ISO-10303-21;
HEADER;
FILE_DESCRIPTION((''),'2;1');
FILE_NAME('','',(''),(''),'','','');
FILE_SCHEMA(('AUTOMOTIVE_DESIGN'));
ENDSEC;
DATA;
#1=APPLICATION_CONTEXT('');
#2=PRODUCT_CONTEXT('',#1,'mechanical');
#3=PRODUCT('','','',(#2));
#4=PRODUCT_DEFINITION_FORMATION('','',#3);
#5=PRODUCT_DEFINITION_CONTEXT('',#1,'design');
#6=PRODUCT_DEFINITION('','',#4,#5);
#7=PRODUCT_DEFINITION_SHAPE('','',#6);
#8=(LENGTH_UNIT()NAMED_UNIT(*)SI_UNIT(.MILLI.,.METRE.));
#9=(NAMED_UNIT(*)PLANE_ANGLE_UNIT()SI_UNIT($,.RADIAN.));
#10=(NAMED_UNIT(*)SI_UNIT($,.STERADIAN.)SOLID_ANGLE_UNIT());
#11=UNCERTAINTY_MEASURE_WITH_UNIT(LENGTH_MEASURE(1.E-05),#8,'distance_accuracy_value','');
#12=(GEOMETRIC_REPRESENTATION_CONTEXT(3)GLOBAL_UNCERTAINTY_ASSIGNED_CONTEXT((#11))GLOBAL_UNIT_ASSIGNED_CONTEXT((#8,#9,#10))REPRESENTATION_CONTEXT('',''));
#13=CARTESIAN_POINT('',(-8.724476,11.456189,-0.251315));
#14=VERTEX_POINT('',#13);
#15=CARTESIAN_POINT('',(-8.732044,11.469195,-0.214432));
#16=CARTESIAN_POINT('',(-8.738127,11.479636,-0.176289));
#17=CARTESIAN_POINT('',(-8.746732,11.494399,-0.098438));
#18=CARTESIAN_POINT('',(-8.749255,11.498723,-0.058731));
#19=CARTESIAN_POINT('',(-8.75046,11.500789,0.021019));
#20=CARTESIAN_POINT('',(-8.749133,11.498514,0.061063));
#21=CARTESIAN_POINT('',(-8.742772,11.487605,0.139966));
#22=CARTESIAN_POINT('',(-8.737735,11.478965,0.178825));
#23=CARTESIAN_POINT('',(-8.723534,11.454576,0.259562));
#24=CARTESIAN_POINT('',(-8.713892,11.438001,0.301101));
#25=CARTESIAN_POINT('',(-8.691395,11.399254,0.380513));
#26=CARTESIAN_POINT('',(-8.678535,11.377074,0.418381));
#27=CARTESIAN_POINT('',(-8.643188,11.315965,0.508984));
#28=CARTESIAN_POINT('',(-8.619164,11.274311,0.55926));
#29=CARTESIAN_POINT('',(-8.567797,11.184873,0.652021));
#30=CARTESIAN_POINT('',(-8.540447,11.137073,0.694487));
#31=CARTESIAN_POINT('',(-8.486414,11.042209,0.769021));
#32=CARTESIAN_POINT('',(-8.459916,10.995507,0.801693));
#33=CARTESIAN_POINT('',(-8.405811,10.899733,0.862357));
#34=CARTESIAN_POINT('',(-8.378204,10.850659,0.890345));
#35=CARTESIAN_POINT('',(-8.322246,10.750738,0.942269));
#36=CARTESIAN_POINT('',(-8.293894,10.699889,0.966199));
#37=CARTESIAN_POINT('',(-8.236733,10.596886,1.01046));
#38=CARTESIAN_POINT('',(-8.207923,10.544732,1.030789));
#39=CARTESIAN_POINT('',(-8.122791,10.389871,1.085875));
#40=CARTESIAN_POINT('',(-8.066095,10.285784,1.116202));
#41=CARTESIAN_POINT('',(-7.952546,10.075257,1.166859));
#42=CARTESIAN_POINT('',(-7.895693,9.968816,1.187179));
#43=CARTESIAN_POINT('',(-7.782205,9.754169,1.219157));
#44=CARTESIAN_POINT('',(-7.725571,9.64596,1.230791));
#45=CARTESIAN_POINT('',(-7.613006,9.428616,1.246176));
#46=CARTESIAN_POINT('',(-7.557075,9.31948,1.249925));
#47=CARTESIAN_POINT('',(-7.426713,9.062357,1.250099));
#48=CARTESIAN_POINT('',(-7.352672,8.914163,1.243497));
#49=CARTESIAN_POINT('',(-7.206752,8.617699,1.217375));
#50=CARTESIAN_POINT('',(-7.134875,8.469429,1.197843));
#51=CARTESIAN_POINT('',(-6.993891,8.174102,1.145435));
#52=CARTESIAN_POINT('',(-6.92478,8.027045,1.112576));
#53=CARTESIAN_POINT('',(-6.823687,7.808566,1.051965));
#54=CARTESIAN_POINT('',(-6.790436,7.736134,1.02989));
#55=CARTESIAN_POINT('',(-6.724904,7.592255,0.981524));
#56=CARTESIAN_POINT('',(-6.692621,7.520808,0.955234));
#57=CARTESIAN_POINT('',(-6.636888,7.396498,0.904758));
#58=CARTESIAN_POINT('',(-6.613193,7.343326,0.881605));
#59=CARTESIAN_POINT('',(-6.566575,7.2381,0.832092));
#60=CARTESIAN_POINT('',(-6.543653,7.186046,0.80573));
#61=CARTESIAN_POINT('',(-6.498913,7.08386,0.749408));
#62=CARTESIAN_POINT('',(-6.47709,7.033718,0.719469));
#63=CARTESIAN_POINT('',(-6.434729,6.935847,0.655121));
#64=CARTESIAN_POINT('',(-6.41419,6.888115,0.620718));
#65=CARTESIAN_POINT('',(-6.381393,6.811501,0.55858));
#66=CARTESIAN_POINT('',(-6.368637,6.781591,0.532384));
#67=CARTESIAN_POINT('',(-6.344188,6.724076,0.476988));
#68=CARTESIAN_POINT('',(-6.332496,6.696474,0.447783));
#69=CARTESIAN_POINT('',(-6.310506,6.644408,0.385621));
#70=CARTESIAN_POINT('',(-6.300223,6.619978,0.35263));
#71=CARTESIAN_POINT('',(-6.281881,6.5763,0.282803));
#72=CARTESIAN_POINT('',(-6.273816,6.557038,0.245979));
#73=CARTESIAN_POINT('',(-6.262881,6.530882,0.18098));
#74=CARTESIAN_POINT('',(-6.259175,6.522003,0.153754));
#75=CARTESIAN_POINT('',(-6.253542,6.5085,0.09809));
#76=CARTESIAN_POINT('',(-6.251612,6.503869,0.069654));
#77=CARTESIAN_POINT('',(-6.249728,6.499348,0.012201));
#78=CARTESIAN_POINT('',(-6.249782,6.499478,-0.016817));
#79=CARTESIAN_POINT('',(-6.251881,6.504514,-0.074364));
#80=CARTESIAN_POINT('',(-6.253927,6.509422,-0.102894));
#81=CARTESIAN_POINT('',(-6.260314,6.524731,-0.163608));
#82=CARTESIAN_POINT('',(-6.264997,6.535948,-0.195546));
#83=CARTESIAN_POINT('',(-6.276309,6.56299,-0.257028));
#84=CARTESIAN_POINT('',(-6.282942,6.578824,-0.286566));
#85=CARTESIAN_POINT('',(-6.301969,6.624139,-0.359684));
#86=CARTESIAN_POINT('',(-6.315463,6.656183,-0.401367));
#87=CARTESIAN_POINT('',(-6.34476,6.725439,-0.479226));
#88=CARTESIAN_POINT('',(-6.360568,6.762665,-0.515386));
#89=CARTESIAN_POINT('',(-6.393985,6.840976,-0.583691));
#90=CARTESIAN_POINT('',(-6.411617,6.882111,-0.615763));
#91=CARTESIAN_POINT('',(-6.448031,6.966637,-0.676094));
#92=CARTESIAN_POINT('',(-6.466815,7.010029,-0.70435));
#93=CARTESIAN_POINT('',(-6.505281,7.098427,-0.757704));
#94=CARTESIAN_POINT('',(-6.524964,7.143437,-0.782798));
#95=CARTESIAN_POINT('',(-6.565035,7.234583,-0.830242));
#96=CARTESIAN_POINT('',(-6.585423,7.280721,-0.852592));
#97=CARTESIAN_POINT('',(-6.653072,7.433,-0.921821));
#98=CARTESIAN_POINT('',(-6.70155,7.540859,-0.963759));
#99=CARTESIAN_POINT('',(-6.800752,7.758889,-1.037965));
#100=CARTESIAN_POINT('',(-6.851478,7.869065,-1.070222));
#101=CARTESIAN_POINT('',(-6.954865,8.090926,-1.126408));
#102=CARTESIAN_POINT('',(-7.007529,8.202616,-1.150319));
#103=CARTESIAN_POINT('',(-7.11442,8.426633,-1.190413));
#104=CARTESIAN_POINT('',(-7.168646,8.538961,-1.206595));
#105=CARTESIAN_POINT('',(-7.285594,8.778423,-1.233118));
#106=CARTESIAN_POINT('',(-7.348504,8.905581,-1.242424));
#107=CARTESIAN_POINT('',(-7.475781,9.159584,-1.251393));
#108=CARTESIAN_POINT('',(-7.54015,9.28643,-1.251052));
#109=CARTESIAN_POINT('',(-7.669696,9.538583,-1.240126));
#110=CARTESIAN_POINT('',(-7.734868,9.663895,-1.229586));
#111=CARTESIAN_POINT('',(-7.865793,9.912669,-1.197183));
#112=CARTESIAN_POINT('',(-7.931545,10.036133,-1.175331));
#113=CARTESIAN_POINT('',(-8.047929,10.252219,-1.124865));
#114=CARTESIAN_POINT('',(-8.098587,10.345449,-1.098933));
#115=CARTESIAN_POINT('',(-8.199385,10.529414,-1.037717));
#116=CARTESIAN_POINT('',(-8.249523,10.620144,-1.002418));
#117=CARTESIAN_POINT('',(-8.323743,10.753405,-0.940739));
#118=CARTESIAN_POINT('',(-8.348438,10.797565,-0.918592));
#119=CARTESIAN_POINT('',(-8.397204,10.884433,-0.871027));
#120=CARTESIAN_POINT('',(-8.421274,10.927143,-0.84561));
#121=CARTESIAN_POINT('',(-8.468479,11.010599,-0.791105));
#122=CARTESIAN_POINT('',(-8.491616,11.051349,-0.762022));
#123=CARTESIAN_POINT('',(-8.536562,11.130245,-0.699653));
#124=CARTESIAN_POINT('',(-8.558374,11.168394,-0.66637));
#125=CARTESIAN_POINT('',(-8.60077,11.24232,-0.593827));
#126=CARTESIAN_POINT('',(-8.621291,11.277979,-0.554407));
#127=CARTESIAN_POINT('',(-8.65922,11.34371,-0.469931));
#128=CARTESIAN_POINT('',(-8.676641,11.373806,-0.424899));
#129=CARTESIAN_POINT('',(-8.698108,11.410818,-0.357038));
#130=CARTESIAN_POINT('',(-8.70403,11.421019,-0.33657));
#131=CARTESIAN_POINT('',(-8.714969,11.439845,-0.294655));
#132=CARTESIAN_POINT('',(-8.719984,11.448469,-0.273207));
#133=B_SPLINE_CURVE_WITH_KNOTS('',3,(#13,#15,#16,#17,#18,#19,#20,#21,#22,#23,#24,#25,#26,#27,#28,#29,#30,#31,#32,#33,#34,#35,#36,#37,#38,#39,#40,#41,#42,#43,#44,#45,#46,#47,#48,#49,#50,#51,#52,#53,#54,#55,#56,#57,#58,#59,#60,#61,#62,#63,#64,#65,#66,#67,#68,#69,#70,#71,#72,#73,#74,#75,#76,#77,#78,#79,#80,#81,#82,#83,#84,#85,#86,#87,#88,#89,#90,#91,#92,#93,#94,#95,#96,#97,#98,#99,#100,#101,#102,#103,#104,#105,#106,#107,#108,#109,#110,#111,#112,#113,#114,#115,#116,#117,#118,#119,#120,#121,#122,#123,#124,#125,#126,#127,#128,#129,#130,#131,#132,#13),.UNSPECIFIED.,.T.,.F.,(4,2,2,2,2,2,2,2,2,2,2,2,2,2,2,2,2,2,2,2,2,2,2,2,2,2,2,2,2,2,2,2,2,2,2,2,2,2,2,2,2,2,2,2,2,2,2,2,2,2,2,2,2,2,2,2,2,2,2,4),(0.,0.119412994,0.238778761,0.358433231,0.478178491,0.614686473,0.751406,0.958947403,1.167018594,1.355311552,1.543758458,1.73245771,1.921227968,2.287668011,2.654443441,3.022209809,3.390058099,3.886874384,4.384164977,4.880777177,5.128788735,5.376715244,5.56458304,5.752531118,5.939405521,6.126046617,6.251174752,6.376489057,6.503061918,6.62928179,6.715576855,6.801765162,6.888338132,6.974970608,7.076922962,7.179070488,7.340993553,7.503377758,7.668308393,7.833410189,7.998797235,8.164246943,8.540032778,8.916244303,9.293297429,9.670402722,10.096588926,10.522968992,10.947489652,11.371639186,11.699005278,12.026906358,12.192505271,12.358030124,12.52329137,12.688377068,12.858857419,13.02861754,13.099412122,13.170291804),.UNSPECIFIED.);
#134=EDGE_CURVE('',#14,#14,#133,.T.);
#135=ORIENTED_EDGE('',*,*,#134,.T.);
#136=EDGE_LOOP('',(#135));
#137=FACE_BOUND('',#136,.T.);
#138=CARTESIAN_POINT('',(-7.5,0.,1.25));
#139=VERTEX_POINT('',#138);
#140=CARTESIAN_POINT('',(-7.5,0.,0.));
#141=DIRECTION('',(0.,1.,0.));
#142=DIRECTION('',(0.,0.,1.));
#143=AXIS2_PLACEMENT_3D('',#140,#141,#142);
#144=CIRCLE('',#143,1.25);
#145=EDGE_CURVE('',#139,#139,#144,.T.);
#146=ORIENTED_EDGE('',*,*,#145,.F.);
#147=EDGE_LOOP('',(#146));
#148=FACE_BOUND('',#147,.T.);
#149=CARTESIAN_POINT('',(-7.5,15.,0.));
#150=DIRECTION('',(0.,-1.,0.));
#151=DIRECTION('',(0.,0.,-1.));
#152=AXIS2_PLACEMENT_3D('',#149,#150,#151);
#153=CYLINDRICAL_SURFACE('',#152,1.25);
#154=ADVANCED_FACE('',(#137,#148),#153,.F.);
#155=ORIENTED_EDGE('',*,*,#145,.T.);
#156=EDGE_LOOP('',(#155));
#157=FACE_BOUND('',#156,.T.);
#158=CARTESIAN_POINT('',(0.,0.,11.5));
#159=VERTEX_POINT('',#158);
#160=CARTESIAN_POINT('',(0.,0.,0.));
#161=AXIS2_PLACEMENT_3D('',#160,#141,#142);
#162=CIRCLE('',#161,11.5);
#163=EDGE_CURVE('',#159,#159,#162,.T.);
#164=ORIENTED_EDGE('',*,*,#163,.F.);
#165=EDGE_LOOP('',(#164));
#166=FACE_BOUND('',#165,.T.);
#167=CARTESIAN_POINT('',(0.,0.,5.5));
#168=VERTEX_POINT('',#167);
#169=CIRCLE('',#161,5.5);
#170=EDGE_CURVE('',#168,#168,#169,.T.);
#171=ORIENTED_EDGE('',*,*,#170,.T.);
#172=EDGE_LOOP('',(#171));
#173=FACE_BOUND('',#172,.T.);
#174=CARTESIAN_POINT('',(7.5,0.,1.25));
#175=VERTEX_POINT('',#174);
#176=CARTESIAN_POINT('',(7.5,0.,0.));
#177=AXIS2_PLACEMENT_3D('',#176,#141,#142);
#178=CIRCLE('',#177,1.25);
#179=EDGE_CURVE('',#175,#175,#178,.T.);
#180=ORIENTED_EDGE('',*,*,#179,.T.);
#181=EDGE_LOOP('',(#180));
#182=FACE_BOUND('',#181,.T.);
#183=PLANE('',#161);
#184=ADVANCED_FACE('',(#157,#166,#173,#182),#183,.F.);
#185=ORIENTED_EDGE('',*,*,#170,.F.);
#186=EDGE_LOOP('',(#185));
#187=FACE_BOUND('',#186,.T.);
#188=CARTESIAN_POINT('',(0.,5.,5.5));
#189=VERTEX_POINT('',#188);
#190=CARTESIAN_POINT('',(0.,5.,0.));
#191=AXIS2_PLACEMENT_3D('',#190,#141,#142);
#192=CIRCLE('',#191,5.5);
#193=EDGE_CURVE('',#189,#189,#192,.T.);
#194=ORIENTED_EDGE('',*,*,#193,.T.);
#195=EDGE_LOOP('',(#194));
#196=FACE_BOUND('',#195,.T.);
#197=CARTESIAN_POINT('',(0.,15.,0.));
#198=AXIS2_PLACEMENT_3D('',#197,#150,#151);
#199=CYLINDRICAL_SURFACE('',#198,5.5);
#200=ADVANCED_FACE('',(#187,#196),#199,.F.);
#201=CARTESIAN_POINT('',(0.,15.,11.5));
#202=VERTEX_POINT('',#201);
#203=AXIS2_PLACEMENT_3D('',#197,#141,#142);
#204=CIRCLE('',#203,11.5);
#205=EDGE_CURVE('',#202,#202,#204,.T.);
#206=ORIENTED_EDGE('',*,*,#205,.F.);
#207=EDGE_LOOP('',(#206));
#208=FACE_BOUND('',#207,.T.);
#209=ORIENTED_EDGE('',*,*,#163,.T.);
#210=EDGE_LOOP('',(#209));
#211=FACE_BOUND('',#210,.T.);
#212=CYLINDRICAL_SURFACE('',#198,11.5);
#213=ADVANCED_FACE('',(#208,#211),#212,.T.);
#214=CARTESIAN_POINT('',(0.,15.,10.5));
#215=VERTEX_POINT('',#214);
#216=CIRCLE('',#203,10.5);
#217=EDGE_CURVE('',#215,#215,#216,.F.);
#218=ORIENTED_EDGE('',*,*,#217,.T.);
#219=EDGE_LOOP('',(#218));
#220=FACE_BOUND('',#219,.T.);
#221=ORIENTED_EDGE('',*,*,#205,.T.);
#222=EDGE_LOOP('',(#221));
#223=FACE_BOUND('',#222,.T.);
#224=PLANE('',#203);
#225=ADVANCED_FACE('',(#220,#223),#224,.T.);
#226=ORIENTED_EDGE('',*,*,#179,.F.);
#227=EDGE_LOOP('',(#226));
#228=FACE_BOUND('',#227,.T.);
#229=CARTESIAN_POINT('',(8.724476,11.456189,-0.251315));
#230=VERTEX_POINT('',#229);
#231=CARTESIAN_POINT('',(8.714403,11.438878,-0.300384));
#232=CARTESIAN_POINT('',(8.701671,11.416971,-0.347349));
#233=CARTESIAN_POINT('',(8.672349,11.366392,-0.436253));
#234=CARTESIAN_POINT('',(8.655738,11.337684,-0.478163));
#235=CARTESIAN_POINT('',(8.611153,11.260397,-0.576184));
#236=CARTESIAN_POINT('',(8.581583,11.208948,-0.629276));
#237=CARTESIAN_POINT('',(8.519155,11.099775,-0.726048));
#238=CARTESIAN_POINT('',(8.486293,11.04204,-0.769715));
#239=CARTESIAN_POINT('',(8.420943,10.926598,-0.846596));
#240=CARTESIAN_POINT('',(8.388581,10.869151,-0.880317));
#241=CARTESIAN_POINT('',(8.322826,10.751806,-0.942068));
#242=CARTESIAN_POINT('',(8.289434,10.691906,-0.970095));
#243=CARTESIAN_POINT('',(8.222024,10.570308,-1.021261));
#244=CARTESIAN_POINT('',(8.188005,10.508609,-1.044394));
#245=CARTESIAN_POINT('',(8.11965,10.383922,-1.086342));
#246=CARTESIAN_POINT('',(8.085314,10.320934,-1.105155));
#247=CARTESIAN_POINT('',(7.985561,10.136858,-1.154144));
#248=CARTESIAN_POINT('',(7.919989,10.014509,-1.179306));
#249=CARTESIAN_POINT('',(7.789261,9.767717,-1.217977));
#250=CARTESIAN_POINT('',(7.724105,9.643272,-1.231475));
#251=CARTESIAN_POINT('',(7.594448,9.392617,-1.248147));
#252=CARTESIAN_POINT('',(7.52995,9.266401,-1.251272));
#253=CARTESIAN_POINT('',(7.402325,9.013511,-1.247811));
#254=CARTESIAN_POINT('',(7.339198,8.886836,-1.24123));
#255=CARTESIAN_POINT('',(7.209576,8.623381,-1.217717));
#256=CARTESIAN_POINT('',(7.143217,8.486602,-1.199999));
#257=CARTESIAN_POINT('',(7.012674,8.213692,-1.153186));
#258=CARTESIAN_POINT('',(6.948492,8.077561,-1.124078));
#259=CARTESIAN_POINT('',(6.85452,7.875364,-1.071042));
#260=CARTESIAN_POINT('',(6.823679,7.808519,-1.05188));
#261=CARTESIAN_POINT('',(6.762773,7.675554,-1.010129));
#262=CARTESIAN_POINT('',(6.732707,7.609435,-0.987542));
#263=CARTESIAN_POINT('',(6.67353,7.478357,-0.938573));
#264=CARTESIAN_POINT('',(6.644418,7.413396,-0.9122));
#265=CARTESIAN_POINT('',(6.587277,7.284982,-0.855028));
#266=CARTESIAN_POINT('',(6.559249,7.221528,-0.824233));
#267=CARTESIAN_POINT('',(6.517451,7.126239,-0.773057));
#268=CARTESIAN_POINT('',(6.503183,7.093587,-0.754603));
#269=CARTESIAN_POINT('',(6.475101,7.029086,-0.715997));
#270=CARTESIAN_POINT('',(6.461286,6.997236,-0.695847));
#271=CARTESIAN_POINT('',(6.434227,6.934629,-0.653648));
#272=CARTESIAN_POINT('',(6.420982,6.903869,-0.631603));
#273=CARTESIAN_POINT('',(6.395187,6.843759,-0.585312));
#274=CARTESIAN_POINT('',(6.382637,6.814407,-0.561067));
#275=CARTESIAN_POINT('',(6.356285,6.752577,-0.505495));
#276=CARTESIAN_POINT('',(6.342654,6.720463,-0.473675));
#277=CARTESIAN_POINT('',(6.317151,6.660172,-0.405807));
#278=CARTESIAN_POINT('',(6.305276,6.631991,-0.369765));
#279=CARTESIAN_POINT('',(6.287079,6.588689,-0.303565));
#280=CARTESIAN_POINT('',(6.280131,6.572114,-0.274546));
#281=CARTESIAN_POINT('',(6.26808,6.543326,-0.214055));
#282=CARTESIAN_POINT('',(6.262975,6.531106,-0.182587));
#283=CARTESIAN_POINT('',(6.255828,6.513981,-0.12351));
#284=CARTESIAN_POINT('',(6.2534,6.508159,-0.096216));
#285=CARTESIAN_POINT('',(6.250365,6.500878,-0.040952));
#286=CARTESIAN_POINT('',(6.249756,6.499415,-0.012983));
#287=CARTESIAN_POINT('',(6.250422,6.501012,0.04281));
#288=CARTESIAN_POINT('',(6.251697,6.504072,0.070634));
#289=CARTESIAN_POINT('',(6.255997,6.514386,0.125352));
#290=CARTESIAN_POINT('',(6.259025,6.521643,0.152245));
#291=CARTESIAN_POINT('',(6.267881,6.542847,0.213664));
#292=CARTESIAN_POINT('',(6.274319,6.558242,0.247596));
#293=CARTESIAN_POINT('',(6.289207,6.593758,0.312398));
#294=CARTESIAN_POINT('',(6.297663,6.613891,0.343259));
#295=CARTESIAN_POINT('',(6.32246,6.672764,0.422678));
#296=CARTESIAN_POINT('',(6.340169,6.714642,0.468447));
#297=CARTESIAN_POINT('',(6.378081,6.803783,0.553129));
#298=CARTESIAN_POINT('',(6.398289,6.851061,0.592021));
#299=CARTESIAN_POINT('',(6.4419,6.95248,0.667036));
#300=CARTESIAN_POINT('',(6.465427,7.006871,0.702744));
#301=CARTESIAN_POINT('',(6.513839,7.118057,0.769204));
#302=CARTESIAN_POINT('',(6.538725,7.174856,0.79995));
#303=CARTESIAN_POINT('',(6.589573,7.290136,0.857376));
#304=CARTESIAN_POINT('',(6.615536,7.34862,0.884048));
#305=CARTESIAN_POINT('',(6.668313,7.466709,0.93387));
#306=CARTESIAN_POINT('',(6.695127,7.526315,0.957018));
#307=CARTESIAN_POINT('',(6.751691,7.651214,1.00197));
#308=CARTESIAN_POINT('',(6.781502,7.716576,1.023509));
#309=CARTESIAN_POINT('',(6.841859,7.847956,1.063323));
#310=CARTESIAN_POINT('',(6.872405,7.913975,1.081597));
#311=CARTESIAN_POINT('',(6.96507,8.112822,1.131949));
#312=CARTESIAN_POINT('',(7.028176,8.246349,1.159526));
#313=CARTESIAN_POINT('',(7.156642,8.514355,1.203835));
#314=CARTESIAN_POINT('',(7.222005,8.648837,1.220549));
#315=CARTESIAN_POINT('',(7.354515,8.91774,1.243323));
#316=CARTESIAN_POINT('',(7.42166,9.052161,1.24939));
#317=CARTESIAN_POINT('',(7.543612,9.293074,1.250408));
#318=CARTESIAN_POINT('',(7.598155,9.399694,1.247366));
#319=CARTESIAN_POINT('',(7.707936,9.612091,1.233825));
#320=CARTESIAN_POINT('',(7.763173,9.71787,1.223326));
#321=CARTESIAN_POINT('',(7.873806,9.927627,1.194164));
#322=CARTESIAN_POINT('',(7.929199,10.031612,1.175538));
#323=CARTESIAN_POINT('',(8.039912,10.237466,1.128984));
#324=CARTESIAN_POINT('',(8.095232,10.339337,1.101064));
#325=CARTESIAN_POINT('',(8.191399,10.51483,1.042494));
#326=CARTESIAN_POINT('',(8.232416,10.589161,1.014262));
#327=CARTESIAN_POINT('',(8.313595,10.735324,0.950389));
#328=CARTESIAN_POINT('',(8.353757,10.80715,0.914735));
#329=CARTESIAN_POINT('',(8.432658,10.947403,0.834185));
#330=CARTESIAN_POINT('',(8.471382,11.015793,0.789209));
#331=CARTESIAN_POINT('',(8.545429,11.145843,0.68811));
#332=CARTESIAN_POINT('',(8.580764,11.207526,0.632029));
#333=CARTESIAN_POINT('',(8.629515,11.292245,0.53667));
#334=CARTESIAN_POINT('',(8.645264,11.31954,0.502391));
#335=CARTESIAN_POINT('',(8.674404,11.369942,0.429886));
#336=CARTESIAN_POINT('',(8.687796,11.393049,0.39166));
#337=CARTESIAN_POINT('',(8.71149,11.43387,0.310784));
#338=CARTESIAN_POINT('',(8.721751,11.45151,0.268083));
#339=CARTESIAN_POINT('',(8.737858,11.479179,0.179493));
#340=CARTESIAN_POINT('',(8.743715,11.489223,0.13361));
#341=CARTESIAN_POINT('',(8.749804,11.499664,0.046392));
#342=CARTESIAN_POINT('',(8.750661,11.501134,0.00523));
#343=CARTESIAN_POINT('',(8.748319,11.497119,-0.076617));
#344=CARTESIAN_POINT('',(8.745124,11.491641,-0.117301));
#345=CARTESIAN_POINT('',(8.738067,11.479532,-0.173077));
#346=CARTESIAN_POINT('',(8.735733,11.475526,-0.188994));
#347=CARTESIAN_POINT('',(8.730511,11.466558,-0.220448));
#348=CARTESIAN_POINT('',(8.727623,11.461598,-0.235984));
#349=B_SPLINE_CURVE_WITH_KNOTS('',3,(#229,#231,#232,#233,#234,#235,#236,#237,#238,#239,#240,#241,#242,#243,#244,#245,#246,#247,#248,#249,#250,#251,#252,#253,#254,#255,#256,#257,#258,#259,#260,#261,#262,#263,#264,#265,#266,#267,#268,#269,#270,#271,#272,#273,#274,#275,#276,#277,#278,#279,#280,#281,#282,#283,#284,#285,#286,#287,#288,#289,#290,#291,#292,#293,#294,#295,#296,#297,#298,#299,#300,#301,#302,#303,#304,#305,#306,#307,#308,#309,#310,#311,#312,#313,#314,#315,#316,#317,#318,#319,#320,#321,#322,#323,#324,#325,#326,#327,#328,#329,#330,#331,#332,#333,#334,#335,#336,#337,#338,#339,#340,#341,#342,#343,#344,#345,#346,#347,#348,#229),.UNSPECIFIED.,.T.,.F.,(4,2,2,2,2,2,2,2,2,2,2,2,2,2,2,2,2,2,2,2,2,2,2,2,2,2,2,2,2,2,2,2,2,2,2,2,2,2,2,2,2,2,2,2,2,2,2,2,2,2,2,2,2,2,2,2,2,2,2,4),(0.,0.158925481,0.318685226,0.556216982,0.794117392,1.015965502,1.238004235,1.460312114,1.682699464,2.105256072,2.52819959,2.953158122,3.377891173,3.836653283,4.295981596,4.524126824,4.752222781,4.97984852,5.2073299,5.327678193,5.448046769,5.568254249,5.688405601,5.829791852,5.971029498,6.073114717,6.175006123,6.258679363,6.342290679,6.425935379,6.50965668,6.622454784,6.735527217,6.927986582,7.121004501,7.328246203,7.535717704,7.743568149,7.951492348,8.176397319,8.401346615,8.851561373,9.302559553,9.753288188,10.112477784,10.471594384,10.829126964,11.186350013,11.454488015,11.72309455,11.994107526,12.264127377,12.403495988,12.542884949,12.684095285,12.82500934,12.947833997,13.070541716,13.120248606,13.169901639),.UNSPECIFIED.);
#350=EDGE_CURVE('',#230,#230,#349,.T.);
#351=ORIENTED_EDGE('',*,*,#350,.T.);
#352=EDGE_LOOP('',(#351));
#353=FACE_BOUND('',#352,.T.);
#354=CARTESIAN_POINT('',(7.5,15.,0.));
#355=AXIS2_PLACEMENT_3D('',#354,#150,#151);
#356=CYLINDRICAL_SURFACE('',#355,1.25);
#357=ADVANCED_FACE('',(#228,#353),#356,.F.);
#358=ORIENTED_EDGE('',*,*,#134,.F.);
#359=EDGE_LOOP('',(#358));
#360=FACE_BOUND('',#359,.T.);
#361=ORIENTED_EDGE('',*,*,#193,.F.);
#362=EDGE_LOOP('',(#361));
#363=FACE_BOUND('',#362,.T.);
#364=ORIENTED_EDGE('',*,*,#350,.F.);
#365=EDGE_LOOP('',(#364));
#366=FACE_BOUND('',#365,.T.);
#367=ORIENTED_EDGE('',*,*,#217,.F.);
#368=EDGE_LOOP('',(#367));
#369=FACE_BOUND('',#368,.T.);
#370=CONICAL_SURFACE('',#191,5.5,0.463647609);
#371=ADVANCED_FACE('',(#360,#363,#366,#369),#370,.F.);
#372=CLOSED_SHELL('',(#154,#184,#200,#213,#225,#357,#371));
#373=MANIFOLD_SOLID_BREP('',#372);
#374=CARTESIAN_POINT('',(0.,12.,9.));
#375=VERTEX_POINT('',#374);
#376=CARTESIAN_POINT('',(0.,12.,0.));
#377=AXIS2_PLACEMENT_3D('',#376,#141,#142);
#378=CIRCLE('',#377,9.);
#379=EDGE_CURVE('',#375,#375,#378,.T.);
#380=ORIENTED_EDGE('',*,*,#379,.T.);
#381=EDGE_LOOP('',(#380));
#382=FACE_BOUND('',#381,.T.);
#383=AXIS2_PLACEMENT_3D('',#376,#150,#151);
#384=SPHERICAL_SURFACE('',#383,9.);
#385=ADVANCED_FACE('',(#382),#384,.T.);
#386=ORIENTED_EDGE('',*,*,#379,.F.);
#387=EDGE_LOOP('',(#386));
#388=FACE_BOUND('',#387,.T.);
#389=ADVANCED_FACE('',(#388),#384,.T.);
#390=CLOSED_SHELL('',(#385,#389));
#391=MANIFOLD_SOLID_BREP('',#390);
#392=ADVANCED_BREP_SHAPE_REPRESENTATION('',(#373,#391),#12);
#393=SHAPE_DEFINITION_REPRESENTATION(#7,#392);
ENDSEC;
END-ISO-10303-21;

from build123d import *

# Parameters (mm, degrees)
SKETCH1_R           = 11.5
SKETCH1_R_2         = 5.5
SKETCH1_R_3         = 1.25
BOSS_EXTRUDE1_DEPTH = 15
CHAMFER1_SIZE       = 10
CHAMFER1_SIZE_2     = 5
SKETCH2_R           = 9
BOSS_EXTRUDE2_DEPTH = 9
FILLET1_R           = 9


# Some blends are built 0.0001 mm under size
with BuildPart() as part:
    # Sketch1 → Boss-Extrude1 (new body)
    with BuildSketch(Plane(origin=(0, 0, 0), x_dir=(1, 0, 0), z_dir=(0, 1, 0))):
        with Locations(Location((0, 0, 0), (0, 0, 270))):
            Circle(SKETCH1_R)
        with Locations(Location((0, 0, 0), (0, 0, 270))):
            Circle(SKETCH1_R_2, mode=Mode.SUBTRACT)
        with Locations(Location((7.5, 0, 0), (0, 0, 270))):
            Circle(SKETCH1_R_3, mode=Mode.SUBTRACT)
        with Locations(Location((-7.5, 0, 0), (0, 0, 270))):
            Circle(SKETCH1_R_3, mode=Mode.SUBTRACT)
    extrude(amount=BOSS_EXTRUDE1_DEPTH)

    # Chamfer1
    # the kernel refuses this chamfer: 10, 5 mm, written as the material it takes off along each edge
    with BuildSketch(Plane(origin=(0, 15, 0), x_dir=(0, 0, 1), z_dir=(-1, 0, 0))) as chamfer1_piece_1:
        Polygon((5.5, -CHAMFER1_SIZE), (5.5 + CHAMFER1_SIZE_2, 0), (5.5, 0), align=None)
    revolve(axis=Axis((0, 15, 0), (0, 1, 0)), mode=Mode.SUBTRACT)


with BuildPart() as body_2:
    # Sketch2 → Boss-Extrude2 (new, symmetric)
    with BuildSketch(Plane(origin=(0, 12, 0), x_dir=(-1, 0, 0), z_dir=(0, -1, 0))):
        with Locations(Location((0, 0, 0), (0, 0, 90))):
            Circle(SKETCH2_R)
    extrude(amount=BOSS_EXTRUDE2_DEPTH, both=True)

    # Fillet1
    fillet1_edges = [body_2.edges().sort_by_distance(p)[0] for p in [
        (0, 21, 9),
        (0, 3, 9),
    ]]
    fillet(fillet1_edges, radius=FILLET1_R - 0.0001)  # a hair under: the kernel refuses the full size


solid = Compound([part.part, body_2.part])
